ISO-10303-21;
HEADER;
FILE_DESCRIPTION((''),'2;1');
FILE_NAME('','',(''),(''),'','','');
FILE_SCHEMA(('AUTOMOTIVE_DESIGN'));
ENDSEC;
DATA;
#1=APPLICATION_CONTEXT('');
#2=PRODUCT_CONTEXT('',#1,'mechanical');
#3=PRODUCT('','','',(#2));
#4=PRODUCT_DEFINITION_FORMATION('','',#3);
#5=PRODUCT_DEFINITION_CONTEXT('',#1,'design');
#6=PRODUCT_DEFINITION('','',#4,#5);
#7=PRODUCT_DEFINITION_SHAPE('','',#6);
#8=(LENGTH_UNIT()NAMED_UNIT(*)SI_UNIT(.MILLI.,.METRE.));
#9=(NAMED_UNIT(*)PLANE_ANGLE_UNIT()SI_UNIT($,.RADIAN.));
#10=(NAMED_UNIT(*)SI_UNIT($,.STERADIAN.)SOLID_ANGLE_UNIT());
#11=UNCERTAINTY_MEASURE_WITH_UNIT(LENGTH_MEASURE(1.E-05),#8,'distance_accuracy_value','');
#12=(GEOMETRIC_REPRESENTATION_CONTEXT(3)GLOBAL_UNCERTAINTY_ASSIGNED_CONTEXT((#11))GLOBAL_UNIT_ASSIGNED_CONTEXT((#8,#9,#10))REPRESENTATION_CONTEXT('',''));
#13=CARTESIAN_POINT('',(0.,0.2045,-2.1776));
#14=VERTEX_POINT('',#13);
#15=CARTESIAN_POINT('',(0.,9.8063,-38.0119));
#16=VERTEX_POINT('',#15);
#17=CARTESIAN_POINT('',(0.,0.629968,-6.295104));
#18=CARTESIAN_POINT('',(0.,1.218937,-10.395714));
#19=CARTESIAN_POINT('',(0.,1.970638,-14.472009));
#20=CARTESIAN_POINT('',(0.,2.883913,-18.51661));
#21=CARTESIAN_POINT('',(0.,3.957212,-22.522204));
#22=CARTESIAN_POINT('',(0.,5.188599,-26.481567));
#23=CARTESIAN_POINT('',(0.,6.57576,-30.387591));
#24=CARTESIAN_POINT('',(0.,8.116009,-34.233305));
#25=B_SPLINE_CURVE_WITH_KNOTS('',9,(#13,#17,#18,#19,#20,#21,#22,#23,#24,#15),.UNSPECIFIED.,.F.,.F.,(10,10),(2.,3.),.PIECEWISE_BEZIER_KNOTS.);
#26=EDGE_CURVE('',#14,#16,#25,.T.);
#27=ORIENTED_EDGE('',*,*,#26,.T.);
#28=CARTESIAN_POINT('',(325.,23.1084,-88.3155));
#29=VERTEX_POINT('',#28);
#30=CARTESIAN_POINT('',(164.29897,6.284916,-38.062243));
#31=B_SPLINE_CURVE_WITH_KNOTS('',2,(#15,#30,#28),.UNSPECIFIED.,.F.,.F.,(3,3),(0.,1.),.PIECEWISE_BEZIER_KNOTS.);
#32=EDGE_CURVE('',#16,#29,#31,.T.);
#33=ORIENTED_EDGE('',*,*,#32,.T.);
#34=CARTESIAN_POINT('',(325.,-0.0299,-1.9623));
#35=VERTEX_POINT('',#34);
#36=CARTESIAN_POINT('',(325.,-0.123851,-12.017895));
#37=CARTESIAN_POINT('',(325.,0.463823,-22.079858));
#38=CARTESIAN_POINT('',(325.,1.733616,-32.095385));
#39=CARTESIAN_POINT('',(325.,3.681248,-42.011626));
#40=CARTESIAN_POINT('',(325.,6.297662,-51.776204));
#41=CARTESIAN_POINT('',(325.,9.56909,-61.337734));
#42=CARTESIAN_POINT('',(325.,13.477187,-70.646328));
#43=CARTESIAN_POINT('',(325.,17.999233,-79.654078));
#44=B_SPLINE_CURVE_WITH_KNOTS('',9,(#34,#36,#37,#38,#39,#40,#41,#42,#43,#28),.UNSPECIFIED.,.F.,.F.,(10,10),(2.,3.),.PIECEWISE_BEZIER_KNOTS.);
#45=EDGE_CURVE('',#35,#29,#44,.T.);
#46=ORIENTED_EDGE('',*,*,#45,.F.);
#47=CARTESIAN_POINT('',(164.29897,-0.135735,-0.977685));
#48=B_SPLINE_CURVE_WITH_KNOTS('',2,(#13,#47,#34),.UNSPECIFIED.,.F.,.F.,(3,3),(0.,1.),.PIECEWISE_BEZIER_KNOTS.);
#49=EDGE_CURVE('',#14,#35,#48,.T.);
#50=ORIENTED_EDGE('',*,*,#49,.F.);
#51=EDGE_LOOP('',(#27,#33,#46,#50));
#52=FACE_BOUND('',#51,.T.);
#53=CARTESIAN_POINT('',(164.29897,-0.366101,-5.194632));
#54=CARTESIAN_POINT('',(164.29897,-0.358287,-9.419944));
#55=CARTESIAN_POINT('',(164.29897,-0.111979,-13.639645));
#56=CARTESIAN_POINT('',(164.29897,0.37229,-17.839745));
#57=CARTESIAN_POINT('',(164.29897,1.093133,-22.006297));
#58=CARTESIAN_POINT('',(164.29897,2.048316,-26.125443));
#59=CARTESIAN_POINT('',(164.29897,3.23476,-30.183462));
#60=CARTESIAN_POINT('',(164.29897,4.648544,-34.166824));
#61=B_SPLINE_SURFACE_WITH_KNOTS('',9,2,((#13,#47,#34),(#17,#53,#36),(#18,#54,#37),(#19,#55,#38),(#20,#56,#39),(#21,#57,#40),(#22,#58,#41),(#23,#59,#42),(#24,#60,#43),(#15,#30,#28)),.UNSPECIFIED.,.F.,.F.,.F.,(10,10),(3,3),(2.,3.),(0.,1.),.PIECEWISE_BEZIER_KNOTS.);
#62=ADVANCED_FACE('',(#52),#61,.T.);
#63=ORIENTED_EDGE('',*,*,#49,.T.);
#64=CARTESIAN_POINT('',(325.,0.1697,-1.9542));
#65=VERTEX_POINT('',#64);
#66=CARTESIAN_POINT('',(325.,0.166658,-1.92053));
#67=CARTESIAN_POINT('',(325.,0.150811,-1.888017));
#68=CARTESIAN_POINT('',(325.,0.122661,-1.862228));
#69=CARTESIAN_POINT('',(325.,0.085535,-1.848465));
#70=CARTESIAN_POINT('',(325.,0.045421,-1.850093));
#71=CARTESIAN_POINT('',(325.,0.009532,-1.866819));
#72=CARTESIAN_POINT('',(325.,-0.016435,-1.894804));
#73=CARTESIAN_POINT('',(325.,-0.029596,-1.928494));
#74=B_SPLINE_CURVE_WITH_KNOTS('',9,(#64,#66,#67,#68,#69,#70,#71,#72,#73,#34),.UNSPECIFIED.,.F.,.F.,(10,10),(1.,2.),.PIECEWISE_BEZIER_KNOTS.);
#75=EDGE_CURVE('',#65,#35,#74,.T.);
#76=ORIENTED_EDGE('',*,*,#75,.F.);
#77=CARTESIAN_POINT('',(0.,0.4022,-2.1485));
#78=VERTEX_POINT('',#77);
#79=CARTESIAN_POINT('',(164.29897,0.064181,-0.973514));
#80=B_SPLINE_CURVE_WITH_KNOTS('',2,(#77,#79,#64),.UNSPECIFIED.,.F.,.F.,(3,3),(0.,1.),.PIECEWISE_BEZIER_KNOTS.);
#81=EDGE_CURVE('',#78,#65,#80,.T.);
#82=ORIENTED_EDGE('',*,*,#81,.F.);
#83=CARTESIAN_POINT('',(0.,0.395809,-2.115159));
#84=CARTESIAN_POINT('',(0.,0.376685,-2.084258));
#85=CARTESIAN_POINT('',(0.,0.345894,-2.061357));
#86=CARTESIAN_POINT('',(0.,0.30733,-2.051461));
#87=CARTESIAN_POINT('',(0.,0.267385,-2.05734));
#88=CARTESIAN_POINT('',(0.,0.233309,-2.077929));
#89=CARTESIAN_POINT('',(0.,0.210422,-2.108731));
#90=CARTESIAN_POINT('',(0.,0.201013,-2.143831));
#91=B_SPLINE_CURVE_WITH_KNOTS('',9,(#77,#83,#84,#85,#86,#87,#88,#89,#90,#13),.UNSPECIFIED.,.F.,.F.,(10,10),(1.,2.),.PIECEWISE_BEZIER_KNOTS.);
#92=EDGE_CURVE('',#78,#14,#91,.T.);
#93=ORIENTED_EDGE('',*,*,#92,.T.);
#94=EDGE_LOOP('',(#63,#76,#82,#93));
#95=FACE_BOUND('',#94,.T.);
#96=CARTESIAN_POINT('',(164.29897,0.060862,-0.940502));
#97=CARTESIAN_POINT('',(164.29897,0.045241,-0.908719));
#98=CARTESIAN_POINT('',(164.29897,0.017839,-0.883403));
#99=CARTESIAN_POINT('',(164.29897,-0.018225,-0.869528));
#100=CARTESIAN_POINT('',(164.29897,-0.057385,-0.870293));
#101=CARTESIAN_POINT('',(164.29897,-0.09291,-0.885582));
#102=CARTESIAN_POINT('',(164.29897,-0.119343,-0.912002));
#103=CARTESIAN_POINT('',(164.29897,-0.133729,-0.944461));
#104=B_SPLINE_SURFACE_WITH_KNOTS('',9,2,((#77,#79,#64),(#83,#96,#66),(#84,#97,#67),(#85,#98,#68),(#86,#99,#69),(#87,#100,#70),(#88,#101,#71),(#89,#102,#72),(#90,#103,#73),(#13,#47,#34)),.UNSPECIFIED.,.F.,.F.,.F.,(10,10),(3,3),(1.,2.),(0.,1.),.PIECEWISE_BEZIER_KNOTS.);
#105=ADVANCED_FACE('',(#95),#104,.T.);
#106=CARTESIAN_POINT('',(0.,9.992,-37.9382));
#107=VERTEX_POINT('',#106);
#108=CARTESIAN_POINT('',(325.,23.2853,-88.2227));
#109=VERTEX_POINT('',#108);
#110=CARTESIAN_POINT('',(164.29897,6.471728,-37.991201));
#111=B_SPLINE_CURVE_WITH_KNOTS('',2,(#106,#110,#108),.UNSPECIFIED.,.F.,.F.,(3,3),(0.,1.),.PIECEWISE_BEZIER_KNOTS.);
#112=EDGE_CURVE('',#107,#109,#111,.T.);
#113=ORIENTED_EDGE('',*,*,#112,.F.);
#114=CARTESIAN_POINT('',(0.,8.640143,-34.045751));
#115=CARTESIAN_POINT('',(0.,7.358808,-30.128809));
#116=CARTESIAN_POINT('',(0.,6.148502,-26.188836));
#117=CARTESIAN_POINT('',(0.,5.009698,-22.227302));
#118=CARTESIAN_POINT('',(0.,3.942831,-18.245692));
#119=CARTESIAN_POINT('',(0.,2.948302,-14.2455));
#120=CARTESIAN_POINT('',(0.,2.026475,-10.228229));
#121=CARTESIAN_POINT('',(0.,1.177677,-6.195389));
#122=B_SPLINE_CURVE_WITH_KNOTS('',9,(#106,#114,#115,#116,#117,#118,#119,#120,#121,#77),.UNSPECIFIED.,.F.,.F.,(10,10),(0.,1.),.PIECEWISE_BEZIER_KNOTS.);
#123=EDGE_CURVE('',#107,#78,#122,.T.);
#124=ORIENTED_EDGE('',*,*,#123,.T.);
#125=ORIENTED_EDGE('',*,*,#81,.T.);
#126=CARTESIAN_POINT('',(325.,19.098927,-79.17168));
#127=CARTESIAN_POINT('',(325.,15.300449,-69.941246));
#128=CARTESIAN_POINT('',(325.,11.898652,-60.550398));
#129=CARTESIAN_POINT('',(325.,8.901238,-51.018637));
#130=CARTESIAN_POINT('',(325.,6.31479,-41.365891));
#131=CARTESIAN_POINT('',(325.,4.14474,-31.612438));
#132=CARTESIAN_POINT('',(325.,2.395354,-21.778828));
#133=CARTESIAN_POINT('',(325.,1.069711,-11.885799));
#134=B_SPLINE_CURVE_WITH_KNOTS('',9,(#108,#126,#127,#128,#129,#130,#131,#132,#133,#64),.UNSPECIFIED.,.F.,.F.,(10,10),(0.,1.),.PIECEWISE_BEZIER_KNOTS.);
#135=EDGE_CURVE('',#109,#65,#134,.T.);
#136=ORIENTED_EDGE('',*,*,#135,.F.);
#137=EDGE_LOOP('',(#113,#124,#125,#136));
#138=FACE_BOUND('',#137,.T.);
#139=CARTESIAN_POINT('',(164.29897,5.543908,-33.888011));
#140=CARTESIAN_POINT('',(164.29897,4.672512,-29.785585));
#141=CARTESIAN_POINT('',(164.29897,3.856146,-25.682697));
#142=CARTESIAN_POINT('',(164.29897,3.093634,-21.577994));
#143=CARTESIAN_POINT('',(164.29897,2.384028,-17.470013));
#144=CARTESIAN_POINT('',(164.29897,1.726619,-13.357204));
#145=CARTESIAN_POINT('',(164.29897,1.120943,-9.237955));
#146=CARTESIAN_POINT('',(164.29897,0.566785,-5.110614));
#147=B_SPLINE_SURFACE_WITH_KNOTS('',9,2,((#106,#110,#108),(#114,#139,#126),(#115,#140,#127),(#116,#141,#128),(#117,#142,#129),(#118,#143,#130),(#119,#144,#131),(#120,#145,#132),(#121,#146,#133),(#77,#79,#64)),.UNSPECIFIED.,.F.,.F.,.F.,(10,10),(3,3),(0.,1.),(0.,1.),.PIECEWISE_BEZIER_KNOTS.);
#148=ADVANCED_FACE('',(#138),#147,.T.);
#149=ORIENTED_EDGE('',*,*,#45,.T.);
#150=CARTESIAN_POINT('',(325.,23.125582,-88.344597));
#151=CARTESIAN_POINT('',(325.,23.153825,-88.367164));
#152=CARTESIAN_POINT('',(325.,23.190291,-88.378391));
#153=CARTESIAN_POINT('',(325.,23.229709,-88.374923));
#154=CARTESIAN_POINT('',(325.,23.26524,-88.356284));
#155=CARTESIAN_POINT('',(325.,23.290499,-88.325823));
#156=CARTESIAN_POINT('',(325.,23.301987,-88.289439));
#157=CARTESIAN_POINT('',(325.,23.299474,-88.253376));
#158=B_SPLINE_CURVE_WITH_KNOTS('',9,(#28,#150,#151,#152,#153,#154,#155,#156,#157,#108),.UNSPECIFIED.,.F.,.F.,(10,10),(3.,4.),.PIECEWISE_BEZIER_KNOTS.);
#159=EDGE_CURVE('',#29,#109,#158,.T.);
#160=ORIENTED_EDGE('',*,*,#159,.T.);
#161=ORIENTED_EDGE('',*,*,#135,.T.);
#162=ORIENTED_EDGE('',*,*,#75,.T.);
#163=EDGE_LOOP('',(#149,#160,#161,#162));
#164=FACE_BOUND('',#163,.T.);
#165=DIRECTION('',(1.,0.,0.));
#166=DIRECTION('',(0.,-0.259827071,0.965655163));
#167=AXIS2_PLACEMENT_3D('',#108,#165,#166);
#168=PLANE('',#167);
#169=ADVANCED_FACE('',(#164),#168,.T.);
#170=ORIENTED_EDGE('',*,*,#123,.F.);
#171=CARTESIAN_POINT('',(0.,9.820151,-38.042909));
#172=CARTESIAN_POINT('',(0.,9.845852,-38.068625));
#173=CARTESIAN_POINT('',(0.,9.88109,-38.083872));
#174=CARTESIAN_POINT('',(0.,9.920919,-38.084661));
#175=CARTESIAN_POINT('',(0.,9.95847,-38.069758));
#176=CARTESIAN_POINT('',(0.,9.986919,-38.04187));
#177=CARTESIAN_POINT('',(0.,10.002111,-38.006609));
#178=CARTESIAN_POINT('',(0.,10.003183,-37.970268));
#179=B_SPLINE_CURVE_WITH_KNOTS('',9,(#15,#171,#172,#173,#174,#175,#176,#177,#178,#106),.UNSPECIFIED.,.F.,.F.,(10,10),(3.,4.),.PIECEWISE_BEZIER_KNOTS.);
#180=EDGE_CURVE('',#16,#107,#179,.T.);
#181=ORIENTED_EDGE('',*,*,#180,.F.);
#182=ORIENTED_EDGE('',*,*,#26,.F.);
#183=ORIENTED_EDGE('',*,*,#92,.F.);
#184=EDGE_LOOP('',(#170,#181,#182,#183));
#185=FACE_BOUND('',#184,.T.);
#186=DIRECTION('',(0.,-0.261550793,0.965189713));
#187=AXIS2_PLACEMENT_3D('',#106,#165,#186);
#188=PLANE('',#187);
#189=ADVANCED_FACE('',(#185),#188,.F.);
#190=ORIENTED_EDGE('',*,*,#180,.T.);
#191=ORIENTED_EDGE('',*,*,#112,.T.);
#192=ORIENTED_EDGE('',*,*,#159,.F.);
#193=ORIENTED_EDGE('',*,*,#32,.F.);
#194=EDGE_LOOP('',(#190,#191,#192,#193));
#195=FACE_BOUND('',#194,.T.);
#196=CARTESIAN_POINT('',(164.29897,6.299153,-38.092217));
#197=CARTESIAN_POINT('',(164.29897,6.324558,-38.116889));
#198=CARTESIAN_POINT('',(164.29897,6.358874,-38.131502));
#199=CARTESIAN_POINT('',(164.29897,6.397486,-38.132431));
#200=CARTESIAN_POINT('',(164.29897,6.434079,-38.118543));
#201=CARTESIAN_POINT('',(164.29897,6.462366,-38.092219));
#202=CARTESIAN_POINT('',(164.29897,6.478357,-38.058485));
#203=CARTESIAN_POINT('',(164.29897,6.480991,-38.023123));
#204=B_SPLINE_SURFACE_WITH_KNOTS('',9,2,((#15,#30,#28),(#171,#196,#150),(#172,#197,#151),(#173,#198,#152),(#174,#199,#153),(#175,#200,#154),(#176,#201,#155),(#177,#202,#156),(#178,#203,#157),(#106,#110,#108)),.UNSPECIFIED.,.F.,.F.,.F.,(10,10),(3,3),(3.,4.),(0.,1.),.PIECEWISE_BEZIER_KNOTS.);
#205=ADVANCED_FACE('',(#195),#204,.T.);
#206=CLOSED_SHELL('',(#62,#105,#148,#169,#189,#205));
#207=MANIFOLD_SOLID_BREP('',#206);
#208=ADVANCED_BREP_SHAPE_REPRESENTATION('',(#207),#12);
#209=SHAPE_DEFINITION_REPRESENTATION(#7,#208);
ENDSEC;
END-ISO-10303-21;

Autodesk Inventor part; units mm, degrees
ref_plane "XZ Plane" through (0, 0, 0) normal (0, 1, 0) x (-1, 0, 0)
ref_plane "作業平面1" through (150, 0, 0) normal (1, 0, 0) x (0, 1, 0)
ref_plane "作業平面2" through (325, 0, 0) normal (1, 0, 0) x (0, 1, 0)
sketch "スケッチ2" plane through (0, 0, 0) normal (1, 0, 0) x (0, 1, 0)
  arc A0 (0.4022, -2.1485) -> (9.992, -37.9382) centre (251.688, 46.0036) ccw
  arc A1 (0.2045, -2.1776) -> (9.8063, -38.0119) centre (116.8603, 9.8767) ccw
  line L0 (0, -57.2007) -> (0, 63.2044) projected
  line L1 (0, 0) -> (10.718, -40)
  arc A2 (9.8063, -38.0119) -> (9.992, -37.9382) centre (9.8976, -37.9711) ccw
  arc A3 (0.4022, -2.1485) -> (0.2045, -2.1776) centre (0.304, -2.1673) ccw
  dimension "d6" = 40
  dimension "d8" = 15
  dimension "d9" = 0.1
  dimension "d10" = 0.1
sketch "スケッチ3" plane through (150, 0, 0) normal (1, 0, 0) x (0, 1, 0)
  line L0 (0, 0) -> (11.5434, -50)
  arc A0 (0.1854, -1.5241) -> (11.0419, -48.5488) centre (234.0668, 27.7061) ccw
  arc A1 (-0.0138, -1.5364) -> (10.8575, -48.6252) centre (106.5896, -1.7244) ccw
  line L1 (0, -65.5412) -> (0, 43.2473) projected
  arc A2 (10.8575, -48.6252) -> (11.0419, -48.5488) centre (10.9473, -48.5812) ccw
  arc A3 (0.1854, -1.5241) -> (-0.0138, -1.5364) centre (0.0862, -1.5365) ccw
  dimension "d11" = 13
  dimension "d12" = 50
  dimension "d13" = 0.1
sketch "スケッチ4" plane through (325, 0, 0) normal (1, 0, 0) x (0, 1, 0)
  line L0 (0, 0) -> (24.1154, -90)
  arc A0 (0.1697, -1.9542) -> (23.2853, -88.2227) centre (260.8799, 21.6717) ccw
  arc A1 (-0.0299, -1.9623) -> (23.1084, -88.3155) centre (166.8575, -3.5215) ccw
  line L1 (0, -112.3343) -> (0, 44.0061) projected
  arc A2 (23.1084, -88.3155) -> (23.2853, -88.2227) centre (23.1945, -88.2647) ccw
  arc A3 (0.1697, -1.9542) -> (-0.0299, -1.9623) centre (0.0701, -1.9632) ccw
  dimension "d18" = 15
  dimension "d19" = 90
  dimension "d20" = 0.1
loft "ロフト2" add profiles "スケッチ2", "スケッチ3", "スケッチ4"
properties part number "test_front_element"
